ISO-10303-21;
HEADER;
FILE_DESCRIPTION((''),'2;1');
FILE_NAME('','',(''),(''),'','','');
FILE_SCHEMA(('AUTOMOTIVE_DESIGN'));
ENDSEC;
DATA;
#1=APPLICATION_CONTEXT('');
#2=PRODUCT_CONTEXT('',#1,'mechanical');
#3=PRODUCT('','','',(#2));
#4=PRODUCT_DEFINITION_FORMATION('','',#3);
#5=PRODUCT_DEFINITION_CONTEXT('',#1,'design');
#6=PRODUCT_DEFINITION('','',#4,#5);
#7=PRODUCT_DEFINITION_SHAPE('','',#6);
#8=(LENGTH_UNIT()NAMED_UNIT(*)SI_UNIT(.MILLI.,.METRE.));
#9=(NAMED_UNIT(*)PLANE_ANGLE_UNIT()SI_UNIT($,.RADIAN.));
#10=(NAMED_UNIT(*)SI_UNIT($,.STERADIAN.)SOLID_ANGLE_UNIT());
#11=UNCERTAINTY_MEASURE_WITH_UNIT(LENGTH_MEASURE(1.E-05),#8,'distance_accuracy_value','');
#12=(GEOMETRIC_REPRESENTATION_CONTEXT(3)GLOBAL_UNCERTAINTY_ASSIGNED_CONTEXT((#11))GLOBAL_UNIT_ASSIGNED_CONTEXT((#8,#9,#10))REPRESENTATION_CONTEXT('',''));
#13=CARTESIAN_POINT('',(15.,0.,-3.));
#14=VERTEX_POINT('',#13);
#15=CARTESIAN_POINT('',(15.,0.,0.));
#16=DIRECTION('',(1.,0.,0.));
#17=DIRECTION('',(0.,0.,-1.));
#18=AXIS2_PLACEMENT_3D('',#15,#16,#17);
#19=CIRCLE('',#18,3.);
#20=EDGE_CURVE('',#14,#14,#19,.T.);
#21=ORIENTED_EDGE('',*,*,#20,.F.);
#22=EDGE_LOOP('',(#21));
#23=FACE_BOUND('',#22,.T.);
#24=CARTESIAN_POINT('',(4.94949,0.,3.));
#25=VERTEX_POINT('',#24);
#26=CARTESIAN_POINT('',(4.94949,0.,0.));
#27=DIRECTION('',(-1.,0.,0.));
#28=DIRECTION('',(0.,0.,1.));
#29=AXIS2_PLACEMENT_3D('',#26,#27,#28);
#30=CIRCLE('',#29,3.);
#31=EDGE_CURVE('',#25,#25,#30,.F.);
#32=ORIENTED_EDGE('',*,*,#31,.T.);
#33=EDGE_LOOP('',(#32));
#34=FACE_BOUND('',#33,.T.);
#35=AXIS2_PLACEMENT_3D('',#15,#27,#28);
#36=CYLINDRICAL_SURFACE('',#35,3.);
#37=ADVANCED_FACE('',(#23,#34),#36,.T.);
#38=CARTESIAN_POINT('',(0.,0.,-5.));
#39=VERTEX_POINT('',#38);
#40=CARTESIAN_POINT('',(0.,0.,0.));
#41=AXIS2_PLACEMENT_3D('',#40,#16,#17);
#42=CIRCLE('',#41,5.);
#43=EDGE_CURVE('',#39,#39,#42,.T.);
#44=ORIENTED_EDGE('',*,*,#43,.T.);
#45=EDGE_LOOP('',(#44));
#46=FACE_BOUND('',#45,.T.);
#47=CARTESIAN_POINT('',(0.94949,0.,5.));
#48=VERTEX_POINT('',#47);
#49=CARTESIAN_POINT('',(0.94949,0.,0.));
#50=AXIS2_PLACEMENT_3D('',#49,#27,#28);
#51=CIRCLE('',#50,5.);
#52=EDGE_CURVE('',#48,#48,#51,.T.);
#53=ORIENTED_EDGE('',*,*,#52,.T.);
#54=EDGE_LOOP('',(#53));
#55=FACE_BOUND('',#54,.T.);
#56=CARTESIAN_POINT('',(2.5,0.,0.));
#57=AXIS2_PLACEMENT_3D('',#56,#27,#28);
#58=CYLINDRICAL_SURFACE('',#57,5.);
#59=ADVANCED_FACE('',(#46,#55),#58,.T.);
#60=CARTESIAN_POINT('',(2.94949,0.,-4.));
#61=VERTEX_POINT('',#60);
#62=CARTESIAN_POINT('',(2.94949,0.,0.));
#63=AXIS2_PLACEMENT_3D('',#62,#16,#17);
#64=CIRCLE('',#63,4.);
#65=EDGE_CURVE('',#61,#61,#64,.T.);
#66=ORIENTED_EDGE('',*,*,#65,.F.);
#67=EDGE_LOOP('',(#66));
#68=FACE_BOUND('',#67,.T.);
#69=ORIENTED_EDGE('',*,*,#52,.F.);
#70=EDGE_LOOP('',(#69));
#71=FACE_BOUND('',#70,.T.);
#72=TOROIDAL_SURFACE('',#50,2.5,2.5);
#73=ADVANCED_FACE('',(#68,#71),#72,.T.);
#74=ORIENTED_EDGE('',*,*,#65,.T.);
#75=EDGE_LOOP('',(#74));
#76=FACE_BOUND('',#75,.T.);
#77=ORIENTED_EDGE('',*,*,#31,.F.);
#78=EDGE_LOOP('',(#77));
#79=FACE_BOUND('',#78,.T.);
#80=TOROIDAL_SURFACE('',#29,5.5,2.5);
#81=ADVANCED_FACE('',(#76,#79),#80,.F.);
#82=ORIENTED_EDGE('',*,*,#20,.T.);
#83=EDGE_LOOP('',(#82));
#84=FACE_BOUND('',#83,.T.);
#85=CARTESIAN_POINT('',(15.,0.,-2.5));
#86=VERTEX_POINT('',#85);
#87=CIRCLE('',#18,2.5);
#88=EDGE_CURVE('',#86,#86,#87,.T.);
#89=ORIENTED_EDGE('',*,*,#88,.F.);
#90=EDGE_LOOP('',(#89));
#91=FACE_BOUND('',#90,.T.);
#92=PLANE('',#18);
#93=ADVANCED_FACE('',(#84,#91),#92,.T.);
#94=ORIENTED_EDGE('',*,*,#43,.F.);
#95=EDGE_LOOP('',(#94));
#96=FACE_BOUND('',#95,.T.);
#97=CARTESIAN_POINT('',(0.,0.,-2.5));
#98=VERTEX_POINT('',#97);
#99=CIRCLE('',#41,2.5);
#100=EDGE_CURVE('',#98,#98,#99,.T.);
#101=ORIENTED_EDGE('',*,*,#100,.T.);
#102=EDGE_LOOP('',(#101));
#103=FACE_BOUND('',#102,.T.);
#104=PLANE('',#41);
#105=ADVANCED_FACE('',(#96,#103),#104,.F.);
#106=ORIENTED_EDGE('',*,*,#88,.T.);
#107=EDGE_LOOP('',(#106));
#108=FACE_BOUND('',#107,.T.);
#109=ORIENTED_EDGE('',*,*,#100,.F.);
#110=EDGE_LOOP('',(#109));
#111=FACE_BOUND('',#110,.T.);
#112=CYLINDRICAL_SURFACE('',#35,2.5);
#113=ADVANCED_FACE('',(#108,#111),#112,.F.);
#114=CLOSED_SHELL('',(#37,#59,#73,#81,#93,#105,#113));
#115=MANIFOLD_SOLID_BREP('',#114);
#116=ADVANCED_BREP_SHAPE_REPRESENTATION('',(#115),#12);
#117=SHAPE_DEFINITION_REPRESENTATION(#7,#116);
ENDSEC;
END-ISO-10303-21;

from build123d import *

# Parameters (mm, degrees)
SKETCH1_R           = 3
SKETCH1_R_2         = 2.5000000000000004
BOSS_EXTRUDE1_DEPTH = 15
SKETCH2_R           = 5
SKETCH2_R_2         = 3.0000000000000004
BOSS_EXTRUDE2_DEPTH = 2.5
FILLET1_R           = 2.5
FILLET2_R           = 2.5


with BuildPart() as part:
    # Sketch1 → Boss-Extrude1 (new body)
    with BuildSketch(Plane(origin=(0, 0, 0), x_dir=(0, 0, -1), z_dir=(1, 0, 0))):
        Circle(SKETCH1_R)
        Circle(SKETCH1_R_2, mode=Mode.SUBTRACT)
    extrude(amount=BOSS_EXTRUDE1_DEPTH)

    # Sketch2 → Boss-Extrude2 (add)
    with BuildSketch(Plane(origin=(0, 0, 0), x_dir=(0, 0, -1), z_dir=(1, 0, 0))):
        Circle(SKETCH2_R)
        Circle(SKETCH2_R_2, mode=Mode.SUBTRACT)
    extrude(amount=BOSS_EXTRUDE2_DEPTH)

    # Fillet1
    # the kernel refuses this fillet: 2.5 mm, written as the material it adds along each edge
    with BuildSketch(Plane(origin=(2.5, 0, 0), x_dir=(0, 0, -1), z_dir=(0, -1, 0))) as fillet1_piece_1:
        with BuildLine():
            CenterArc((5.5, 2.449489742786441), FILLET1_R, 180, 78.4630409671995)
            Line((5.0000000000006395, 3.13216e-12), (4.990000000000652, -0.04898979485253419))
            ThreePointArc((4.990000000000652, -0.04898979485253419), (4.00000000000032, -0.04999999999999982), (3.0000000000000004, -0.04999999999999982))
            Line((3.0000000000000004, -0.04999999999999982), (2.9500000000000006, 0))
            Line((2.9500000000000006, 0), (2.95, 2.449489742786441))
            Line((2.95, 2.449489742786441), (3, 2.449489742786441))
        make_face()
    revolve(axis=Axis((2.5, 0, 0), (1, 0, 0)))

    # Fillet2
    fillet2_edges = [part.edges().sort_by_distance(p)[0] for p in [
        (2.5, 6.1e-16, 5),
    ]]
    fillet(fillet2_edges, radius=FILLET2_R)


solid = part.part
